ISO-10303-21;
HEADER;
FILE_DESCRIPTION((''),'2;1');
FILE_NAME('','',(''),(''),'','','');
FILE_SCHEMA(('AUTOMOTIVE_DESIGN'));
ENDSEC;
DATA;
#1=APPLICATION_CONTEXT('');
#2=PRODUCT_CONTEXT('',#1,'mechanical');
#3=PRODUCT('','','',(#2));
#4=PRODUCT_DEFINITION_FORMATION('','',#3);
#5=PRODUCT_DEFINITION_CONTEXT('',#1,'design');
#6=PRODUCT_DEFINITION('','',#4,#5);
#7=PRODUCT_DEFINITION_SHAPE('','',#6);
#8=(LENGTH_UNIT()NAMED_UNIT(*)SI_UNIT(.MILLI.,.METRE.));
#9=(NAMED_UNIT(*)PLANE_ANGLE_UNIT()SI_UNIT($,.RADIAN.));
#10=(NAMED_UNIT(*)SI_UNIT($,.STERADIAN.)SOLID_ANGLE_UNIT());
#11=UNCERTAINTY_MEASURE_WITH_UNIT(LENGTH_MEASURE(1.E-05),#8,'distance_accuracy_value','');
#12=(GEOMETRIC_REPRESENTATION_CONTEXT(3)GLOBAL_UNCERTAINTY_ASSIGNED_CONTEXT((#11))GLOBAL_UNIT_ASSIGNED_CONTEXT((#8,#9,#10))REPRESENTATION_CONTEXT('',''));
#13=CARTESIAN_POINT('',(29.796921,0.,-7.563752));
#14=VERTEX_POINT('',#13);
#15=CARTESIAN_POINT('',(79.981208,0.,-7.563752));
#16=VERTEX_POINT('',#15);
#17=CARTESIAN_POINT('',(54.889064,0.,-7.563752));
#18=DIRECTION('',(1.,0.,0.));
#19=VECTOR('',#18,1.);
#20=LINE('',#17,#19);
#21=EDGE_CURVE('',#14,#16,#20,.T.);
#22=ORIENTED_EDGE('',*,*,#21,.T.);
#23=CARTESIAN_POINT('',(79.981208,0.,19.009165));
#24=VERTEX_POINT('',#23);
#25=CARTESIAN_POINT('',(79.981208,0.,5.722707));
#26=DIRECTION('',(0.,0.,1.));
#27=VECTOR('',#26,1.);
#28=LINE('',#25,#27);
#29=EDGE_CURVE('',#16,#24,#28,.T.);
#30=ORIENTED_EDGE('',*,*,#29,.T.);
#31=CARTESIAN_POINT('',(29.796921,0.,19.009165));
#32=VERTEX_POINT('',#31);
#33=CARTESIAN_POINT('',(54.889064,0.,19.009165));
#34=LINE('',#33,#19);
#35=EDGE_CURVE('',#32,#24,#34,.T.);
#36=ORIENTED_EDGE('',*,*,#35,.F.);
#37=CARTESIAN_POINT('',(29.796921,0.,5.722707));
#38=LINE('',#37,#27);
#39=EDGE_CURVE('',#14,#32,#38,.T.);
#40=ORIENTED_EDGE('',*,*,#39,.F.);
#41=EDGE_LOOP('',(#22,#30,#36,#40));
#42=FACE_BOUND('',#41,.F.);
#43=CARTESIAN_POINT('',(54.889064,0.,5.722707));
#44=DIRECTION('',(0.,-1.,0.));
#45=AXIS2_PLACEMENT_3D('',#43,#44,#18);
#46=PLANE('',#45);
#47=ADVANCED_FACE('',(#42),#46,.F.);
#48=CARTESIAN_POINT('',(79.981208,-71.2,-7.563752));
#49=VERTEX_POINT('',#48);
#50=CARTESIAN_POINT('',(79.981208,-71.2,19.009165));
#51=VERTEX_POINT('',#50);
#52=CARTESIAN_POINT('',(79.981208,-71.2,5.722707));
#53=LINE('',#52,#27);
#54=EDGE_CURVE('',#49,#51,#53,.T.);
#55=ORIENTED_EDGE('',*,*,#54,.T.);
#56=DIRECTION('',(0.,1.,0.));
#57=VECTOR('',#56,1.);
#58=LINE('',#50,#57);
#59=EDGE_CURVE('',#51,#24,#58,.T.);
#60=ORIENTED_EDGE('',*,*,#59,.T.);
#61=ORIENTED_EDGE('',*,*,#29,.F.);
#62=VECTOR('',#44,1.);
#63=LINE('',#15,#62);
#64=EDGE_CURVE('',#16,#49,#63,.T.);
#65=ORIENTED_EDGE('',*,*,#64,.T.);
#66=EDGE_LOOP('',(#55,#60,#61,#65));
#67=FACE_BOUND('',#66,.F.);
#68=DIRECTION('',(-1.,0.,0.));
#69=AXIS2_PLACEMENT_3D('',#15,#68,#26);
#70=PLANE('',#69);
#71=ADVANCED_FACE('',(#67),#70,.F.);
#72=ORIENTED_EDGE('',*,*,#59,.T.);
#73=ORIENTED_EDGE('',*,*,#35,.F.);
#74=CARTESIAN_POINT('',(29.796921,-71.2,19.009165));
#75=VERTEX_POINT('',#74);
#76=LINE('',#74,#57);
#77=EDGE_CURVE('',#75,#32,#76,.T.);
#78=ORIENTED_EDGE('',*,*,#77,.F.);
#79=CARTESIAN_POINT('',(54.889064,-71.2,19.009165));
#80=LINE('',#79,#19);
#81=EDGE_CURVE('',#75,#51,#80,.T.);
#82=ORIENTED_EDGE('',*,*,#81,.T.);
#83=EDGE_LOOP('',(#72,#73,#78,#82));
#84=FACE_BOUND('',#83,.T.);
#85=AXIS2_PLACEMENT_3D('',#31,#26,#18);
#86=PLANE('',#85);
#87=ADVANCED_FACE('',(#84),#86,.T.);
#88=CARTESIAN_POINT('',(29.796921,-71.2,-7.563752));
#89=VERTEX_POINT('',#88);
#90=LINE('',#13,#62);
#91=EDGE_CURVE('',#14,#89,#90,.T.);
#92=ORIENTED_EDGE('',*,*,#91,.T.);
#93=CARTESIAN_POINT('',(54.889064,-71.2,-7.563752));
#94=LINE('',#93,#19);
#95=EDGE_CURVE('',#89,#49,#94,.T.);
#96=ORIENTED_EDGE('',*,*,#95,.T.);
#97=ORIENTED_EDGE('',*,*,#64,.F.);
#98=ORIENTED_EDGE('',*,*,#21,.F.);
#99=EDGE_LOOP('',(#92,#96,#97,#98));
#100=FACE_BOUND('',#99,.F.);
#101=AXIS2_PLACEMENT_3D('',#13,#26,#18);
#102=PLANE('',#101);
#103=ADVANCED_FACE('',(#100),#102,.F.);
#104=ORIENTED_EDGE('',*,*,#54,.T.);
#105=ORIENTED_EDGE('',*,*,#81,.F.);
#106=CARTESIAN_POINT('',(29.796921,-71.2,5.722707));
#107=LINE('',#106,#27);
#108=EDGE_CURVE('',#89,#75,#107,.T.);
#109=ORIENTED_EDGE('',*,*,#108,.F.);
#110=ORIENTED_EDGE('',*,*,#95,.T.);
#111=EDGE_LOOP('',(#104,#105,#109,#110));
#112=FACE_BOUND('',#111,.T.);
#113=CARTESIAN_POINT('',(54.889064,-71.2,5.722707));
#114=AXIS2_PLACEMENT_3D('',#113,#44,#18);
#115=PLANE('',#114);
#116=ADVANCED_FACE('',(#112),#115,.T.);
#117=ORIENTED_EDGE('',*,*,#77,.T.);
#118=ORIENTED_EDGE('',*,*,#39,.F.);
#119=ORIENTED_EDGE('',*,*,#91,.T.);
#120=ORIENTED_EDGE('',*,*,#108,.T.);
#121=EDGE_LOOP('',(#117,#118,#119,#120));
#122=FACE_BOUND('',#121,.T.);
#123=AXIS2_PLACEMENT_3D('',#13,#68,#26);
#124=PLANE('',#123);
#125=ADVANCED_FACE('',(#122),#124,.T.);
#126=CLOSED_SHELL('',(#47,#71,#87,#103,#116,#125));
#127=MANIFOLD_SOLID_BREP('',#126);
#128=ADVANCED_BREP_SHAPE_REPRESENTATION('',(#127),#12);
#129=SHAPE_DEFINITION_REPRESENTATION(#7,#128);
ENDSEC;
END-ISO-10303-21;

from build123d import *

# Parameters (mm, degrees)
F0_W     = 50.1842871308
F0_H     = 26.5729175881
F1_DEPTH = 25
F2_DEPTH = 71.2


# Not quite as in the source:
# - the program builds the solid bodies; features that only make, move or delete a surface that nothing else refers to are left out


with BuildPart() as f1:
    # F0 (on Front) → F1 (new body)
    with BuildSketch(Plane.XZ):
        with Locations((54.8890642822, 5.7227066718)):
            Rectangle(F0_W, F0_H)
    extrude(amount=F1_DEPTH)

    # F0 (on Front) → F2 (join)
    with BuildSketch(Plane.XZ):
        with Locations((54.8890642822, 5.7227066718)):
            Rectangle(F0_W, F0_H)
    extrude(amount=F2_DEPTH)


solid = f1.part
